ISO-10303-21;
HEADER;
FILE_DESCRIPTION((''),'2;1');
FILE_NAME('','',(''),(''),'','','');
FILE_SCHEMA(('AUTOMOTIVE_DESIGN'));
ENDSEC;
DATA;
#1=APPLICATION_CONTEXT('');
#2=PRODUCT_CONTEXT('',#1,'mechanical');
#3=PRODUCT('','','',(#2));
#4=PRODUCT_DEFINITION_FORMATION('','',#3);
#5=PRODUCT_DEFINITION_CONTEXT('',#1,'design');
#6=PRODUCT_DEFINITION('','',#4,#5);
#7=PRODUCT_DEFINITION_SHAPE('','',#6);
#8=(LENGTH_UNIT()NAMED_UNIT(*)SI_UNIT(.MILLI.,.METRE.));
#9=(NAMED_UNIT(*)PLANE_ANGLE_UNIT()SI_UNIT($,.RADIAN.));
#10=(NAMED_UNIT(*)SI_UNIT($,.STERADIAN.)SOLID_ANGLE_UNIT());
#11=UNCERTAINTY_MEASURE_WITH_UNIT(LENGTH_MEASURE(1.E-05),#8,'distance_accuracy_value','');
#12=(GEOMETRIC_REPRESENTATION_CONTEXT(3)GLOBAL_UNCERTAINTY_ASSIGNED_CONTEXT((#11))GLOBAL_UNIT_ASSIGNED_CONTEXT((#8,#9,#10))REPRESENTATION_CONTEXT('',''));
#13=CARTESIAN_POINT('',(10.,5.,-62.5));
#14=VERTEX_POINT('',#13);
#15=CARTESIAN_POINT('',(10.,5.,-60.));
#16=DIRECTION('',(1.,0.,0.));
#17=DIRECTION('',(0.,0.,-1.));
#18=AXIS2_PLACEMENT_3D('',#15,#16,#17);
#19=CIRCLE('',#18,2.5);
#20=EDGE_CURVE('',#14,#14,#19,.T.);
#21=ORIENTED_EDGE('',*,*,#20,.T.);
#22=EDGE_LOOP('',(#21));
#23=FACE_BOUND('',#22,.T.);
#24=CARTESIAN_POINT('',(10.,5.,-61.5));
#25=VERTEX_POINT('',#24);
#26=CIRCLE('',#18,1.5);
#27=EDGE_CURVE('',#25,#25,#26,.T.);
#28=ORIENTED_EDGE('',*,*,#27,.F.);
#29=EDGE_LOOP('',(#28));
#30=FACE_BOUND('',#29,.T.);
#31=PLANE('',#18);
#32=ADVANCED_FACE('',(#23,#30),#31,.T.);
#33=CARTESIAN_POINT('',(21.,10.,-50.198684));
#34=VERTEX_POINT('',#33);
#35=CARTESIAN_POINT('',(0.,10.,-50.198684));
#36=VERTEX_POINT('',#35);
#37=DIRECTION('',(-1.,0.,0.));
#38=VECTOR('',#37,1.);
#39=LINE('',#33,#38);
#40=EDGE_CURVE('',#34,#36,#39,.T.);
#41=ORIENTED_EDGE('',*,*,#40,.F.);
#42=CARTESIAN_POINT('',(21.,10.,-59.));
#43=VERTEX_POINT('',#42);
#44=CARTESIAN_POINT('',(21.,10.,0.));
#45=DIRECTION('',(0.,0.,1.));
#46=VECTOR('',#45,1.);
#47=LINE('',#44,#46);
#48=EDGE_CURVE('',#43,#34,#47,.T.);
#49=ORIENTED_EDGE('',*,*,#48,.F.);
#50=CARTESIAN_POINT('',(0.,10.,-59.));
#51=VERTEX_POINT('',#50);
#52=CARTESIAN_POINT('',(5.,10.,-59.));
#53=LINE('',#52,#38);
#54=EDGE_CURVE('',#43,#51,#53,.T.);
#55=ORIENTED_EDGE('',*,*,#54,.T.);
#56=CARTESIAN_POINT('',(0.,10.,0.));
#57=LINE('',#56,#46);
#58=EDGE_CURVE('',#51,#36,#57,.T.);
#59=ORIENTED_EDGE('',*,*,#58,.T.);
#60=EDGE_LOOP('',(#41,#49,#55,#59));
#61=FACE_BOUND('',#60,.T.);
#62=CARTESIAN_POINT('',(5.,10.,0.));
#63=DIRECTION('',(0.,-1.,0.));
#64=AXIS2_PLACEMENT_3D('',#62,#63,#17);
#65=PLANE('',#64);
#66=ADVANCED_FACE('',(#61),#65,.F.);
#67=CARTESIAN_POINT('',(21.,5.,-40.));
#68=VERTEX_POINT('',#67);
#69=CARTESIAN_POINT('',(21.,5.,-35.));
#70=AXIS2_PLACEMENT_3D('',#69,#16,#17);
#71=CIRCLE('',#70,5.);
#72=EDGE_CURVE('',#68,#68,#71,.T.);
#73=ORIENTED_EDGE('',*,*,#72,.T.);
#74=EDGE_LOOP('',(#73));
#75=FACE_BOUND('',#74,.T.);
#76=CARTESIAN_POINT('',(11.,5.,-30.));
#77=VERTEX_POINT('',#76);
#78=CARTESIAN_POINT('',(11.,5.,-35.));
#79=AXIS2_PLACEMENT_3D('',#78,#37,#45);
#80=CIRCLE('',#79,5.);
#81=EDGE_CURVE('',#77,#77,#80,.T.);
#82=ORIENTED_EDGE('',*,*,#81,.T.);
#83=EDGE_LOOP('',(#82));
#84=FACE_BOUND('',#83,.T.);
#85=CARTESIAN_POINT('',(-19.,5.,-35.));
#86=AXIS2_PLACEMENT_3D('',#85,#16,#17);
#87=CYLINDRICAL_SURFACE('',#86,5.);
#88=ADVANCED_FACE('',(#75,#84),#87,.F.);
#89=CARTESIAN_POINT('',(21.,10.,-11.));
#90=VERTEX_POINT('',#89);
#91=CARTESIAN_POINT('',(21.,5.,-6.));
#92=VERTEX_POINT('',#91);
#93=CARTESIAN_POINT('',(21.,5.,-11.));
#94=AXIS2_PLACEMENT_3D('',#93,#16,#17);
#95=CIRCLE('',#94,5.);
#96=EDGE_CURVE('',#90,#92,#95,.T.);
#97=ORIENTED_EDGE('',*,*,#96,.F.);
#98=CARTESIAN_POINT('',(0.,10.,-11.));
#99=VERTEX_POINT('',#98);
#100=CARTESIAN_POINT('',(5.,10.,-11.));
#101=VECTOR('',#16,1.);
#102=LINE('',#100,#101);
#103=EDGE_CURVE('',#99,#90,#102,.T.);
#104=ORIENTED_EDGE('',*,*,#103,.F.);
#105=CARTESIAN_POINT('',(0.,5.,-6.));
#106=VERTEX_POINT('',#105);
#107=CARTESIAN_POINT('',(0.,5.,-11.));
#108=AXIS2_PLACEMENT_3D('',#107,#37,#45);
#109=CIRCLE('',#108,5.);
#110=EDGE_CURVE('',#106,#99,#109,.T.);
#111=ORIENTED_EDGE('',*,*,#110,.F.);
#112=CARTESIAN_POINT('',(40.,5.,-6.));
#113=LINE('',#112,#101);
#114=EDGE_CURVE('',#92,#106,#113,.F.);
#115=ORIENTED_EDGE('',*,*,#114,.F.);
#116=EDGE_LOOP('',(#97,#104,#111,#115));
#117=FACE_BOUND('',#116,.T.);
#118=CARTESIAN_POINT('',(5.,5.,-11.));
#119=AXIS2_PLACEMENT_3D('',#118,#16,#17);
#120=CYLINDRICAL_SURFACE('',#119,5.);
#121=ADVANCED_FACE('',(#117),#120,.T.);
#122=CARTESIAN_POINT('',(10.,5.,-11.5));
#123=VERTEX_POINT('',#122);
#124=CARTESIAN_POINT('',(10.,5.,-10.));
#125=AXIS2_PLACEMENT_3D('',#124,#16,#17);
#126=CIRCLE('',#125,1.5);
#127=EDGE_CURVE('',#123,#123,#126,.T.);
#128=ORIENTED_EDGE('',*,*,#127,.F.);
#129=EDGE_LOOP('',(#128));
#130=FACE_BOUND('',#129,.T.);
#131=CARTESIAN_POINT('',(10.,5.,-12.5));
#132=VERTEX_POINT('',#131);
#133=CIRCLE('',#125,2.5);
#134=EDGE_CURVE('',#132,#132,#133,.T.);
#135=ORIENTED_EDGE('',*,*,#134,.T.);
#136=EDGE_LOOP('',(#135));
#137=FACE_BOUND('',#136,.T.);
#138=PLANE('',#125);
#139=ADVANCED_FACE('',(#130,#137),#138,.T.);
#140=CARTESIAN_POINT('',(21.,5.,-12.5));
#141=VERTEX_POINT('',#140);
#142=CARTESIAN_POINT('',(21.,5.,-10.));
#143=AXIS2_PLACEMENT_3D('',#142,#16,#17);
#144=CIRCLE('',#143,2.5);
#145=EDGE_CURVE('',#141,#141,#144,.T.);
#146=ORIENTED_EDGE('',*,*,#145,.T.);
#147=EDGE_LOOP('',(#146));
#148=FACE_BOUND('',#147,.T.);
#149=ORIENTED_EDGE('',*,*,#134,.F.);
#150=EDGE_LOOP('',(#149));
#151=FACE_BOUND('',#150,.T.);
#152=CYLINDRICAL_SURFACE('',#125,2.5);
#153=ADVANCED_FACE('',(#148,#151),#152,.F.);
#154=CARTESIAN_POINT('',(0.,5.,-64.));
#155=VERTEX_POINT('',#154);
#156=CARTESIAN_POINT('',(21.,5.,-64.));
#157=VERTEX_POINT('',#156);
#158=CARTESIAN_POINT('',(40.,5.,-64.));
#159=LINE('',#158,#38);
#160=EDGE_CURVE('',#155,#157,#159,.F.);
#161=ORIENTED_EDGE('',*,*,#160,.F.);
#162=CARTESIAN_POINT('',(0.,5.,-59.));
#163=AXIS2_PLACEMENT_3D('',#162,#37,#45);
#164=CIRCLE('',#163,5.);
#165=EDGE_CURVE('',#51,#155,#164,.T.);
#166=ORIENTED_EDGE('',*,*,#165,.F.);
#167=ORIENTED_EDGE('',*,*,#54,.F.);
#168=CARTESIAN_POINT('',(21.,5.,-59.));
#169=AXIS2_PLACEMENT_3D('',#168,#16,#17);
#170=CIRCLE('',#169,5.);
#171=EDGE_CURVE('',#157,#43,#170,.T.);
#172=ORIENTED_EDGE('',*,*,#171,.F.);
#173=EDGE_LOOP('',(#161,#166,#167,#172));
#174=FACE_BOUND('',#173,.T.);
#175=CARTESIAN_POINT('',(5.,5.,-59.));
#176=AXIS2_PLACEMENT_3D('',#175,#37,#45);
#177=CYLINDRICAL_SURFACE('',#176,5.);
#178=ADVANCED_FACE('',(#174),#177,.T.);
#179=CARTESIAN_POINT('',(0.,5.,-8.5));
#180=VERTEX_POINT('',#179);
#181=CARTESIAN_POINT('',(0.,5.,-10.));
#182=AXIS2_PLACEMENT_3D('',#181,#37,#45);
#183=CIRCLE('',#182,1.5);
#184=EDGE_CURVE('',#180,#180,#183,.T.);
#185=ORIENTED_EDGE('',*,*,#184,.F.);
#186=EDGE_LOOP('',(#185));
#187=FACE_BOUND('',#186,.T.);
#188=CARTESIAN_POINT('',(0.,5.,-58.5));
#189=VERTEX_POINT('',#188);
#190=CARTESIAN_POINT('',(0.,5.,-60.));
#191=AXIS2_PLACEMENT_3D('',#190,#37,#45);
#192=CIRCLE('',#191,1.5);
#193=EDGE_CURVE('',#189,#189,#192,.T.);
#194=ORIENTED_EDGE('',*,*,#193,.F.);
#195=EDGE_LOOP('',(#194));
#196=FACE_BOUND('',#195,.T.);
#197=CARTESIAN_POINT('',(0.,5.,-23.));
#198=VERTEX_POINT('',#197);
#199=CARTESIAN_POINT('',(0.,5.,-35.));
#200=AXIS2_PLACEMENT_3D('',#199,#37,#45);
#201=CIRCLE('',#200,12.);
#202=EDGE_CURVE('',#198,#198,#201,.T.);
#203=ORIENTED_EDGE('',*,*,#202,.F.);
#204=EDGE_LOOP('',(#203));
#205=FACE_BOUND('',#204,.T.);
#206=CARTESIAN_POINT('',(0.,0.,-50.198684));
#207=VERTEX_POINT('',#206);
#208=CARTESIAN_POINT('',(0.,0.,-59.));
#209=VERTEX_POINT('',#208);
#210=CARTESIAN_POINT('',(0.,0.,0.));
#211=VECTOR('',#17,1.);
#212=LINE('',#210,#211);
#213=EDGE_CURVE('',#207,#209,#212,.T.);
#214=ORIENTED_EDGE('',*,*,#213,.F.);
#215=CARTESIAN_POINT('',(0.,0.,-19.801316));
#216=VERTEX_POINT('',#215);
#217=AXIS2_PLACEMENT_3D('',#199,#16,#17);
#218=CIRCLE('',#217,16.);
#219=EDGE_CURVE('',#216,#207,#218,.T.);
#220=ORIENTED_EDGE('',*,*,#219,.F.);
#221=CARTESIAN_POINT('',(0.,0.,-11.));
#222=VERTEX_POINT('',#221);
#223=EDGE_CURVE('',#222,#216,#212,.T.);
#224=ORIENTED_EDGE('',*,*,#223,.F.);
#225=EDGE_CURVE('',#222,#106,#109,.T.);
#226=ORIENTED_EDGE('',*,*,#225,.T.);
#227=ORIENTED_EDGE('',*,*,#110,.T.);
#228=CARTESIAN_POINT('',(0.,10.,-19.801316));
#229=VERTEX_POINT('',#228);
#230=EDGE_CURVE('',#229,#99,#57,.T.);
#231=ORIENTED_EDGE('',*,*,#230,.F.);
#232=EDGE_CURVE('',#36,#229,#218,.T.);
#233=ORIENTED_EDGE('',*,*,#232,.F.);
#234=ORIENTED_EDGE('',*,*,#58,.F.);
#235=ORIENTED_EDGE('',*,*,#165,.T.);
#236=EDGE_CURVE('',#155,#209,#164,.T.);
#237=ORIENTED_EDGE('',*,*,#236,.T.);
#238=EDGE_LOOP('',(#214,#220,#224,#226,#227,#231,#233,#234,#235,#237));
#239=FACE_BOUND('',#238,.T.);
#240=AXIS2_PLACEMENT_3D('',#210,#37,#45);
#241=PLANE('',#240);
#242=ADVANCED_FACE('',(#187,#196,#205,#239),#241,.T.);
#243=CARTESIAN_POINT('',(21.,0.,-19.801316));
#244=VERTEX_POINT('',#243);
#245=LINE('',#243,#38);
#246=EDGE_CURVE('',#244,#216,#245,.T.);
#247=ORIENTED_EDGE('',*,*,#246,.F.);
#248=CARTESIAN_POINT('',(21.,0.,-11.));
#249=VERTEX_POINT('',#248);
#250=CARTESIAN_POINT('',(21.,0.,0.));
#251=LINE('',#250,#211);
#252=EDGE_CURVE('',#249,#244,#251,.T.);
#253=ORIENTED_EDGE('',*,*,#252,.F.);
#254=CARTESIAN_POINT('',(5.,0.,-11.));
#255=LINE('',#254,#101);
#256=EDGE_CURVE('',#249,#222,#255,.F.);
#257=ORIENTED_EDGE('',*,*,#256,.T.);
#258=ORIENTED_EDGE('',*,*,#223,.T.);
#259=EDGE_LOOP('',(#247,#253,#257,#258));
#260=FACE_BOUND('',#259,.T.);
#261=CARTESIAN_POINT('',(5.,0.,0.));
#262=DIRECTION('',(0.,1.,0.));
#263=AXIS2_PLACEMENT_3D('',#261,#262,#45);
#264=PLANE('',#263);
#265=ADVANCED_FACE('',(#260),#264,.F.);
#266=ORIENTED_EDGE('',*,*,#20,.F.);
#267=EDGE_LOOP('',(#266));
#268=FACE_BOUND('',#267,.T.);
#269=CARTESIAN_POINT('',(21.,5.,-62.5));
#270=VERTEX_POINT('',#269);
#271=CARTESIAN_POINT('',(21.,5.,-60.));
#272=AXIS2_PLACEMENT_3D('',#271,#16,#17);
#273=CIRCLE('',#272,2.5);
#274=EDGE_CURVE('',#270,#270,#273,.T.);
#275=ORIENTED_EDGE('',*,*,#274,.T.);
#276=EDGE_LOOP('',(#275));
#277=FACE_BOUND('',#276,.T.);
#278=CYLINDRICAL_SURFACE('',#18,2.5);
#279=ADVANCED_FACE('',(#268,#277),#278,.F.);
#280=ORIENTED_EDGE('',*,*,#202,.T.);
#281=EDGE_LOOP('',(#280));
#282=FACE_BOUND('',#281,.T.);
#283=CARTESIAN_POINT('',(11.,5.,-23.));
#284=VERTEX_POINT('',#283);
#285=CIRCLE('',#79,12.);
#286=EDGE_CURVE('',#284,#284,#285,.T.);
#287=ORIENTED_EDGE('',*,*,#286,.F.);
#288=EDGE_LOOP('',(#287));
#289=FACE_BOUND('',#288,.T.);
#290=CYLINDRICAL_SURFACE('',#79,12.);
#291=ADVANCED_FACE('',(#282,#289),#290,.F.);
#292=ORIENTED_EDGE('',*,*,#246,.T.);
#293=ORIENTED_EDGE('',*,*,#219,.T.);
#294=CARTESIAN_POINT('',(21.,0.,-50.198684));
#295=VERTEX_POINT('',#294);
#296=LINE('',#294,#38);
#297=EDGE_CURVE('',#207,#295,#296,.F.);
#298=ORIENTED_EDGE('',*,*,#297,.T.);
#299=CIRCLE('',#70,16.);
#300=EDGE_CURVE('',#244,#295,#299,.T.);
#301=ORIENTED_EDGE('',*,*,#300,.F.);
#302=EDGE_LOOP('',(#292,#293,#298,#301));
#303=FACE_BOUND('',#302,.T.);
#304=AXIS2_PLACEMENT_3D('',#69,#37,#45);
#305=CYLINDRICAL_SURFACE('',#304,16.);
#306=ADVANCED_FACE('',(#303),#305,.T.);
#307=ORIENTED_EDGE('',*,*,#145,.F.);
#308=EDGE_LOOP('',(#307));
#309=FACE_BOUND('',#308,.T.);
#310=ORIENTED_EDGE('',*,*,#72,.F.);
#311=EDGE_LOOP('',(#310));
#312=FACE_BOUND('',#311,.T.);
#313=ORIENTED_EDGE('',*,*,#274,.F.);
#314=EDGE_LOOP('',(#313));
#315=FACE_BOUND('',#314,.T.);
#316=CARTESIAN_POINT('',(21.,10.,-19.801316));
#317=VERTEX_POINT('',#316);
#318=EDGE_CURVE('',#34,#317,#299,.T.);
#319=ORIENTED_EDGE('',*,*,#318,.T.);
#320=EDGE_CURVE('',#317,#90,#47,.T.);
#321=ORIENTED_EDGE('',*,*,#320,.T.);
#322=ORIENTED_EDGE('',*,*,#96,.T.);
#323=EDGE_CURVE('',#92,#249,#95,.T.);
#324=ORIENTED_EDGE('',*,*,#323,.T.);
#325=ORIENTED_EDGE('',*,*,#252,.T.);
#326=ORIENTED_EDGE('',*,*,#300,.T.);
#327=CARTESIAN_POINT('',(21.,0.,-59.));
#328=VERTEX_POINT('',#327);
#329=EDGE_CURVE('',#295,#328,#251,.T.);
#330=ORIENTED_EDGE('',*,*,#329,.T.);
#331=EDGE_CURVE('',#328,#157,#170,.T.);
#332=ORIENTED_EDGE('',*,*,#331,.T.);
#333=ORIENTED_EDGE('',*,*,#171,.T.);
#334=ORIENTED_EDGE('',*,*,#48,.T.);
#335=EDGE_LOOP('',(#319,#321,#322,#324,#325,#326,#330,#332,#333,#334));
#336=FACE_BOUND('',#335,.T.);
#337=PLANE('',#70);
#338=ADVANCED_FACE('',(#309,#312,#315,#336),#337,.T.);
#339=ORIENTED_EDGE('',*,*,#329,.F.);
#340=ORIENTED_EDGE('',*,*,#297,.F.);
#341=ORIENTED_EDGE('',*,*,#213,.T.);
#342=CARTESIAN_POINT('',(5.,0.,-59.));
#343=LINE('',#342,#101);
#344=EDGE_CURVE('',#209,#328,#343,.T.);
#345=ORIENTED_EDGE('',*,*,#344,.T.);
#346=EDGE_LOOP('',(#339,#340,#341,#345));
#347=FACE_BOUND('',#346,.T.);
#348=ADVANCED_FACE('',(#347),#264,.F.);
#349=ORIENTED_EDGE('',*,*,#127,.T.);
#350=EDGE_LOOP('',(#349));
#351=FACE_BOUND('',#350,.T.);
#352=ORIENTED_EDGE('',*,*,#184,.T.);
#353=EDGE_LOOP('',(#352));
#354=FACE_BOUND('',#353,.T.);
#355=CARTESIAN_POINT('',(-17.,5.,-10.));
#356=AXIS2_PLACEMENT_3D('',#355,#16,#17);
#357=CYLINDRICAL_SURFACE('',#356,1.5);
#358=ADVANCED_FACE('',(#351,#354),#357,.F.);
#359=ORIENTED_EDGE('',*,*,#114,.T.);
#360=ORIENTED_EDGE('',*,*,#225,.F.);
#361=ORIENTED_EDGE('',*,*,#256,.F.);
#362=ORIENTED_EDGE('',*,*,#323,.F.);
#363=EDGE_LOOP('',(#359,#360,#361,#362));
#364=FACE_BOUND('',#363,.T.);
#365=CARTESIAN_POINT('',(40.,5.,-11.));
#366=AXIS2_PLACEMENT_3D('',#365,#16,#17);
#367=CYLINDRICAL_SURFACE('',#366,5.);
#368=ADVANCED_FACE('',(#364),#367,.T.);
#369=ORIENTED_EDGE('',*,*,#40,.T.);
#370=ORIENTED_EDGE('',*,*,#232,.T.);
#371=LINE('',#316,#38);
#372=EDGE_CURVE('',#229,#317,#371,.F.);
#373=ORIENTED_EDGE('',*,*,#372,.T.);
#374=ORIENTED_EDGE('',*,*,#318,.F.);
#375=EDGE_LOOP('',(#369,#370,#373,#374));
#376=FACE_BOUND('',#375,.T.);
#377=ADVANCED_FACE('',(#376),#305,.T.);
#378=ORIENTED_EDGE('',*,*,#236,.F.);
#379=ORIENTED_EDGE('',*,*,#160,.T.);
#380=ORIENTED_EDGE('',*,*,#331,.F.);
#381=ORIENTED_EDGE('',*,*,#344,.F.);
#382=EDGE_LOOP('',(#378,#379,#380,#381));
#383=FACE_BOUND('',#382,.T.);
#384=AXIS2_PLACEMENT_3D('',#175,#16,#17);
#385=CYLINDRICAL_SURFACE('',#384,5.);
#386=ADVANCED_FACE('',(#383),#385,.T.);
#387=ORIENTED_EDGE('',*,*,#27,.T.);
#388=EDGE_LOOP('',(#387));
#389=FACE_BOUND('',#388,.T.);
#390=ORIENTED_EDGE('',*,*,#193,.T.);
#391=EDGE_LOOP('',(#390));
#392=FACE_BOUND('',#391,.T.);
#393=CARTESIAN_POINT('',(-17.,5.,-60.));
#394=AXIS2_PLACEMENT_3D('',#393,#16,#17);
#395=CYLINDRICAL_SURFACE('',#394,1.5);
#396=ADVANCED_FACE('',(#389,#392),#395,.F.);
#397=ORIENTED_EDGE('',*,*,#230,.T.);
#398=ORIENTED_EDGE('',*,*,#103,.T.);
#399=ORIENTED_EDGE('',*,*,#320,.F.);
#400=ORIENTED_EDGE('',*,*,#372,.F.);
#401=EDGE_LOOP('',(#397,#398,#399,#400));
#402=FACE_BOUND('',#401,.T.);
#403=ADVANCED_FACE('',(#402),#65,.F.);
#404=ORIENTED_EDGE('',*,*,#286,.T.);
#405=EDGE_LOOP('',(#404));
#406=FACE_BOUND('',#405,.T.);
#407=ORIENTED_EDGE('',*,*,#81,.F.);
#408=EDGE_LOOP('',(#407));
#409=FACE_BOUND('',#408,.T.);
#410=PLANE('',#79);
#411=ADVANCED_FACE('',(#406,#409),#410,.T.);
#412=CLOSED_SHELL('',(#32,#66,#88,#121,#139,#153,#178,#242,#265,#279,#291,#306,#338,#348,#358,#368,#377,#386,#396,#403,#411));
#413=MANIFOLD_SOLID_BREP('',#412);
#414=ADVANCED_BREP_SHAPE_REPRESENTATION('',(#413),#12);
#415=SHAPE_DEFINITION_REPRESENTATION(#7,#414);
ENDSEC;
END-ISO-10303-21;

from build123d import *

# Parameters (mm, degrees)
SKETCH1_W                = 70
SKETCH1_H                = 10
BOSS_EXTRUDE1_DEPTH      = 5
BOSS_EXTRUDE2_DEPTH      = 16
BOSS_EXTRUDE2_DEPTH_BACK = 5
SKETCH2_R                = 16
SKETCH3_W                = 70
SKETCH3_H                = 10
BOSS_EXTRUDE3_DEPTH      = 16
SKETCH4_R                = 2.5
CUT_EXTRUDE1_DEPTH       = 11
SKETCH5_R                = 1.5
CUT_EXTRUDE2_DEPTH       = 38
SKETCH6_R                = 12
CUT_EXTRUDE3_DEPTH       = 11
SKETCH7_R                = 5
CUT_EXTRUDE4_DEPTH       = 40
SKETCH8_W                = 6
SKETCH8_H                = 10
CUT_EXTRUDE5_DEPTH       = 40
FILLET1_R                = 5
FILLET2_R                = 5
FILLET3_R                = 5
FILLET4_R                = 5


with BuildPart() as part:
    # Sketch1 → Boss-Extrude1 (new body)
    with BuildSketch(Plane(origin=(0, 0, 0), x_dir=(0, 0, -1), z_dir=(1, 0, 0))):
        with Locations((35, 5)):
            Rectangle(SKETCH1_W, SKETCH1_H)
    extrude(amount=BOSS_EXTRUDE1_DEPTH)

    # Sketch2 → Boss-Extrude2 (add, two sides: drawn at the far end of the back side and taken through both)
    with BuildSketch(Plane(origin=(5, 0, 0), x_dir=(0, 0, -1), z_dir=(1, 0, 0)).offset(-BOSS_EXTRUDE2_DEPTH_BACK)):
        with Locations(Location((35, 5, 0), (0, 0, 161.790043136))):
            Circle(SKETCH2_R)
    extrude(amount=BOSS_EXTRUDE2_DEPTH + BOSS_EXTRUDE2_DEPTH_BACK)

    # Sketch3 → Boss-Extrude3 (add)
    with BuildSketch(Plane(origin=(5, 0, 0), x_dir=(0, 0, -1), z_dir=(1, 0, 0))):
        with Locations((35, 5)):
            Rectangle(SKETCH3_W, SKETCH3_H)
    extrude(amount=BOSS_EXTRUDE3_DEPTH)

    # Sketch4 → Cut-Extrude1 (cut)
    with BuildSketch(Plane(origin=(21, 0, 0), x_dir=(0, 0, -1), z_dir=(1, 0, 0))):
        with Locations((10, 5)):
            Circle(SKETCH4_R)
        with Locations((60, 5)):
            Circle(SKETCH4_R)
    extrude(amount=-CUT_EXTRUDE1_DEPTH, mode=Mode.SUBTRACT)

    # Sketch5 → Cut-Extrude2 (cut)
    with BuildSketch(Plane(origin=(21, 0, 0), x_dir=(0, 0, -1), z_dir=(1, 0, 0))):
        with Locations((10, 5)):
            Circle(SKETCH5_R)
        with Locations((60, 5)):
            Circle(SKETCH5_R)
    extrude(amount=-CUT_EXTRUDE2_DEPTH, mode=Mode.SUBTRACT)

    # Sketch6 → Cut-Extrude3 (cut)
    with BuildSketch(Plane.ZY):
        with Locations((-35, 5)):
            Circle(SKETCH6_R)
    extrude(amount=-CUT_EXTRUDE3_DEPTH, mode=Mode.SUBTRACT)

    # Sketch7 → Cut-Extrude4 (cut)
    with BuildSketch(Plane(origin=(21, 0, 0), x_dir=(0, 0, -1), z_dir=(1, 0, 0))):
        with Locations((35, 5)):
            Circle(SKETCH7_R)
    extrude(amount=-CUT_EXTRUDE4_DEPTH, mode=Mode.SUBTRACT)

    # Sketch8 → Cut-Extrude5 (cut)
    with BuildSketch(Plane.ZY):
        with Locations((-67, 5)):
            Rectangle(SKETCH8_W, SKETCH8_H)
        with Locations((-3, 5)):
            Rectangle(SKETCH8_W, SKETCH8_H)
    extrude(amount=-CUT_EXTRUDE5_DEPTH, mode=Mode.SUBTRACT)

    # Fillet1
    fillet1_edges = [part.edges().sort_by_distance(p)[0] for p in [
        (10.5, 10, -64),
    ]]
    fillet(fillet1_edges, radius=FILLET1_R)

    # Fillet2
    fillet2_edges = [part.edges().sort_by_distance(p)[0] for p in [
        (10.5, 10, -6),
    ]]
    fillet(fillet2_edges, radius=FILLET2_R)

    # Fillet3
    fillet3_edges = [part.edges().sort_by_distance(p)[0] for p in [
        (10.5, 0, -6),
    ]]
    fillet(fillet3_edges, radius=FILLET3_R - 0.0001)  # a hair under: the kernel refuses the full size

    # Fillet4
    fillet4_edges = [part.edges().sort_by_distance(p)[0] for p in [
        (10.5, 0, -64),
    ]]
    fillet(fillet4_edges, radius=FILLET4_R - 0.0001)  # a hair under: the kernel refuses the full size


solid = part.part
